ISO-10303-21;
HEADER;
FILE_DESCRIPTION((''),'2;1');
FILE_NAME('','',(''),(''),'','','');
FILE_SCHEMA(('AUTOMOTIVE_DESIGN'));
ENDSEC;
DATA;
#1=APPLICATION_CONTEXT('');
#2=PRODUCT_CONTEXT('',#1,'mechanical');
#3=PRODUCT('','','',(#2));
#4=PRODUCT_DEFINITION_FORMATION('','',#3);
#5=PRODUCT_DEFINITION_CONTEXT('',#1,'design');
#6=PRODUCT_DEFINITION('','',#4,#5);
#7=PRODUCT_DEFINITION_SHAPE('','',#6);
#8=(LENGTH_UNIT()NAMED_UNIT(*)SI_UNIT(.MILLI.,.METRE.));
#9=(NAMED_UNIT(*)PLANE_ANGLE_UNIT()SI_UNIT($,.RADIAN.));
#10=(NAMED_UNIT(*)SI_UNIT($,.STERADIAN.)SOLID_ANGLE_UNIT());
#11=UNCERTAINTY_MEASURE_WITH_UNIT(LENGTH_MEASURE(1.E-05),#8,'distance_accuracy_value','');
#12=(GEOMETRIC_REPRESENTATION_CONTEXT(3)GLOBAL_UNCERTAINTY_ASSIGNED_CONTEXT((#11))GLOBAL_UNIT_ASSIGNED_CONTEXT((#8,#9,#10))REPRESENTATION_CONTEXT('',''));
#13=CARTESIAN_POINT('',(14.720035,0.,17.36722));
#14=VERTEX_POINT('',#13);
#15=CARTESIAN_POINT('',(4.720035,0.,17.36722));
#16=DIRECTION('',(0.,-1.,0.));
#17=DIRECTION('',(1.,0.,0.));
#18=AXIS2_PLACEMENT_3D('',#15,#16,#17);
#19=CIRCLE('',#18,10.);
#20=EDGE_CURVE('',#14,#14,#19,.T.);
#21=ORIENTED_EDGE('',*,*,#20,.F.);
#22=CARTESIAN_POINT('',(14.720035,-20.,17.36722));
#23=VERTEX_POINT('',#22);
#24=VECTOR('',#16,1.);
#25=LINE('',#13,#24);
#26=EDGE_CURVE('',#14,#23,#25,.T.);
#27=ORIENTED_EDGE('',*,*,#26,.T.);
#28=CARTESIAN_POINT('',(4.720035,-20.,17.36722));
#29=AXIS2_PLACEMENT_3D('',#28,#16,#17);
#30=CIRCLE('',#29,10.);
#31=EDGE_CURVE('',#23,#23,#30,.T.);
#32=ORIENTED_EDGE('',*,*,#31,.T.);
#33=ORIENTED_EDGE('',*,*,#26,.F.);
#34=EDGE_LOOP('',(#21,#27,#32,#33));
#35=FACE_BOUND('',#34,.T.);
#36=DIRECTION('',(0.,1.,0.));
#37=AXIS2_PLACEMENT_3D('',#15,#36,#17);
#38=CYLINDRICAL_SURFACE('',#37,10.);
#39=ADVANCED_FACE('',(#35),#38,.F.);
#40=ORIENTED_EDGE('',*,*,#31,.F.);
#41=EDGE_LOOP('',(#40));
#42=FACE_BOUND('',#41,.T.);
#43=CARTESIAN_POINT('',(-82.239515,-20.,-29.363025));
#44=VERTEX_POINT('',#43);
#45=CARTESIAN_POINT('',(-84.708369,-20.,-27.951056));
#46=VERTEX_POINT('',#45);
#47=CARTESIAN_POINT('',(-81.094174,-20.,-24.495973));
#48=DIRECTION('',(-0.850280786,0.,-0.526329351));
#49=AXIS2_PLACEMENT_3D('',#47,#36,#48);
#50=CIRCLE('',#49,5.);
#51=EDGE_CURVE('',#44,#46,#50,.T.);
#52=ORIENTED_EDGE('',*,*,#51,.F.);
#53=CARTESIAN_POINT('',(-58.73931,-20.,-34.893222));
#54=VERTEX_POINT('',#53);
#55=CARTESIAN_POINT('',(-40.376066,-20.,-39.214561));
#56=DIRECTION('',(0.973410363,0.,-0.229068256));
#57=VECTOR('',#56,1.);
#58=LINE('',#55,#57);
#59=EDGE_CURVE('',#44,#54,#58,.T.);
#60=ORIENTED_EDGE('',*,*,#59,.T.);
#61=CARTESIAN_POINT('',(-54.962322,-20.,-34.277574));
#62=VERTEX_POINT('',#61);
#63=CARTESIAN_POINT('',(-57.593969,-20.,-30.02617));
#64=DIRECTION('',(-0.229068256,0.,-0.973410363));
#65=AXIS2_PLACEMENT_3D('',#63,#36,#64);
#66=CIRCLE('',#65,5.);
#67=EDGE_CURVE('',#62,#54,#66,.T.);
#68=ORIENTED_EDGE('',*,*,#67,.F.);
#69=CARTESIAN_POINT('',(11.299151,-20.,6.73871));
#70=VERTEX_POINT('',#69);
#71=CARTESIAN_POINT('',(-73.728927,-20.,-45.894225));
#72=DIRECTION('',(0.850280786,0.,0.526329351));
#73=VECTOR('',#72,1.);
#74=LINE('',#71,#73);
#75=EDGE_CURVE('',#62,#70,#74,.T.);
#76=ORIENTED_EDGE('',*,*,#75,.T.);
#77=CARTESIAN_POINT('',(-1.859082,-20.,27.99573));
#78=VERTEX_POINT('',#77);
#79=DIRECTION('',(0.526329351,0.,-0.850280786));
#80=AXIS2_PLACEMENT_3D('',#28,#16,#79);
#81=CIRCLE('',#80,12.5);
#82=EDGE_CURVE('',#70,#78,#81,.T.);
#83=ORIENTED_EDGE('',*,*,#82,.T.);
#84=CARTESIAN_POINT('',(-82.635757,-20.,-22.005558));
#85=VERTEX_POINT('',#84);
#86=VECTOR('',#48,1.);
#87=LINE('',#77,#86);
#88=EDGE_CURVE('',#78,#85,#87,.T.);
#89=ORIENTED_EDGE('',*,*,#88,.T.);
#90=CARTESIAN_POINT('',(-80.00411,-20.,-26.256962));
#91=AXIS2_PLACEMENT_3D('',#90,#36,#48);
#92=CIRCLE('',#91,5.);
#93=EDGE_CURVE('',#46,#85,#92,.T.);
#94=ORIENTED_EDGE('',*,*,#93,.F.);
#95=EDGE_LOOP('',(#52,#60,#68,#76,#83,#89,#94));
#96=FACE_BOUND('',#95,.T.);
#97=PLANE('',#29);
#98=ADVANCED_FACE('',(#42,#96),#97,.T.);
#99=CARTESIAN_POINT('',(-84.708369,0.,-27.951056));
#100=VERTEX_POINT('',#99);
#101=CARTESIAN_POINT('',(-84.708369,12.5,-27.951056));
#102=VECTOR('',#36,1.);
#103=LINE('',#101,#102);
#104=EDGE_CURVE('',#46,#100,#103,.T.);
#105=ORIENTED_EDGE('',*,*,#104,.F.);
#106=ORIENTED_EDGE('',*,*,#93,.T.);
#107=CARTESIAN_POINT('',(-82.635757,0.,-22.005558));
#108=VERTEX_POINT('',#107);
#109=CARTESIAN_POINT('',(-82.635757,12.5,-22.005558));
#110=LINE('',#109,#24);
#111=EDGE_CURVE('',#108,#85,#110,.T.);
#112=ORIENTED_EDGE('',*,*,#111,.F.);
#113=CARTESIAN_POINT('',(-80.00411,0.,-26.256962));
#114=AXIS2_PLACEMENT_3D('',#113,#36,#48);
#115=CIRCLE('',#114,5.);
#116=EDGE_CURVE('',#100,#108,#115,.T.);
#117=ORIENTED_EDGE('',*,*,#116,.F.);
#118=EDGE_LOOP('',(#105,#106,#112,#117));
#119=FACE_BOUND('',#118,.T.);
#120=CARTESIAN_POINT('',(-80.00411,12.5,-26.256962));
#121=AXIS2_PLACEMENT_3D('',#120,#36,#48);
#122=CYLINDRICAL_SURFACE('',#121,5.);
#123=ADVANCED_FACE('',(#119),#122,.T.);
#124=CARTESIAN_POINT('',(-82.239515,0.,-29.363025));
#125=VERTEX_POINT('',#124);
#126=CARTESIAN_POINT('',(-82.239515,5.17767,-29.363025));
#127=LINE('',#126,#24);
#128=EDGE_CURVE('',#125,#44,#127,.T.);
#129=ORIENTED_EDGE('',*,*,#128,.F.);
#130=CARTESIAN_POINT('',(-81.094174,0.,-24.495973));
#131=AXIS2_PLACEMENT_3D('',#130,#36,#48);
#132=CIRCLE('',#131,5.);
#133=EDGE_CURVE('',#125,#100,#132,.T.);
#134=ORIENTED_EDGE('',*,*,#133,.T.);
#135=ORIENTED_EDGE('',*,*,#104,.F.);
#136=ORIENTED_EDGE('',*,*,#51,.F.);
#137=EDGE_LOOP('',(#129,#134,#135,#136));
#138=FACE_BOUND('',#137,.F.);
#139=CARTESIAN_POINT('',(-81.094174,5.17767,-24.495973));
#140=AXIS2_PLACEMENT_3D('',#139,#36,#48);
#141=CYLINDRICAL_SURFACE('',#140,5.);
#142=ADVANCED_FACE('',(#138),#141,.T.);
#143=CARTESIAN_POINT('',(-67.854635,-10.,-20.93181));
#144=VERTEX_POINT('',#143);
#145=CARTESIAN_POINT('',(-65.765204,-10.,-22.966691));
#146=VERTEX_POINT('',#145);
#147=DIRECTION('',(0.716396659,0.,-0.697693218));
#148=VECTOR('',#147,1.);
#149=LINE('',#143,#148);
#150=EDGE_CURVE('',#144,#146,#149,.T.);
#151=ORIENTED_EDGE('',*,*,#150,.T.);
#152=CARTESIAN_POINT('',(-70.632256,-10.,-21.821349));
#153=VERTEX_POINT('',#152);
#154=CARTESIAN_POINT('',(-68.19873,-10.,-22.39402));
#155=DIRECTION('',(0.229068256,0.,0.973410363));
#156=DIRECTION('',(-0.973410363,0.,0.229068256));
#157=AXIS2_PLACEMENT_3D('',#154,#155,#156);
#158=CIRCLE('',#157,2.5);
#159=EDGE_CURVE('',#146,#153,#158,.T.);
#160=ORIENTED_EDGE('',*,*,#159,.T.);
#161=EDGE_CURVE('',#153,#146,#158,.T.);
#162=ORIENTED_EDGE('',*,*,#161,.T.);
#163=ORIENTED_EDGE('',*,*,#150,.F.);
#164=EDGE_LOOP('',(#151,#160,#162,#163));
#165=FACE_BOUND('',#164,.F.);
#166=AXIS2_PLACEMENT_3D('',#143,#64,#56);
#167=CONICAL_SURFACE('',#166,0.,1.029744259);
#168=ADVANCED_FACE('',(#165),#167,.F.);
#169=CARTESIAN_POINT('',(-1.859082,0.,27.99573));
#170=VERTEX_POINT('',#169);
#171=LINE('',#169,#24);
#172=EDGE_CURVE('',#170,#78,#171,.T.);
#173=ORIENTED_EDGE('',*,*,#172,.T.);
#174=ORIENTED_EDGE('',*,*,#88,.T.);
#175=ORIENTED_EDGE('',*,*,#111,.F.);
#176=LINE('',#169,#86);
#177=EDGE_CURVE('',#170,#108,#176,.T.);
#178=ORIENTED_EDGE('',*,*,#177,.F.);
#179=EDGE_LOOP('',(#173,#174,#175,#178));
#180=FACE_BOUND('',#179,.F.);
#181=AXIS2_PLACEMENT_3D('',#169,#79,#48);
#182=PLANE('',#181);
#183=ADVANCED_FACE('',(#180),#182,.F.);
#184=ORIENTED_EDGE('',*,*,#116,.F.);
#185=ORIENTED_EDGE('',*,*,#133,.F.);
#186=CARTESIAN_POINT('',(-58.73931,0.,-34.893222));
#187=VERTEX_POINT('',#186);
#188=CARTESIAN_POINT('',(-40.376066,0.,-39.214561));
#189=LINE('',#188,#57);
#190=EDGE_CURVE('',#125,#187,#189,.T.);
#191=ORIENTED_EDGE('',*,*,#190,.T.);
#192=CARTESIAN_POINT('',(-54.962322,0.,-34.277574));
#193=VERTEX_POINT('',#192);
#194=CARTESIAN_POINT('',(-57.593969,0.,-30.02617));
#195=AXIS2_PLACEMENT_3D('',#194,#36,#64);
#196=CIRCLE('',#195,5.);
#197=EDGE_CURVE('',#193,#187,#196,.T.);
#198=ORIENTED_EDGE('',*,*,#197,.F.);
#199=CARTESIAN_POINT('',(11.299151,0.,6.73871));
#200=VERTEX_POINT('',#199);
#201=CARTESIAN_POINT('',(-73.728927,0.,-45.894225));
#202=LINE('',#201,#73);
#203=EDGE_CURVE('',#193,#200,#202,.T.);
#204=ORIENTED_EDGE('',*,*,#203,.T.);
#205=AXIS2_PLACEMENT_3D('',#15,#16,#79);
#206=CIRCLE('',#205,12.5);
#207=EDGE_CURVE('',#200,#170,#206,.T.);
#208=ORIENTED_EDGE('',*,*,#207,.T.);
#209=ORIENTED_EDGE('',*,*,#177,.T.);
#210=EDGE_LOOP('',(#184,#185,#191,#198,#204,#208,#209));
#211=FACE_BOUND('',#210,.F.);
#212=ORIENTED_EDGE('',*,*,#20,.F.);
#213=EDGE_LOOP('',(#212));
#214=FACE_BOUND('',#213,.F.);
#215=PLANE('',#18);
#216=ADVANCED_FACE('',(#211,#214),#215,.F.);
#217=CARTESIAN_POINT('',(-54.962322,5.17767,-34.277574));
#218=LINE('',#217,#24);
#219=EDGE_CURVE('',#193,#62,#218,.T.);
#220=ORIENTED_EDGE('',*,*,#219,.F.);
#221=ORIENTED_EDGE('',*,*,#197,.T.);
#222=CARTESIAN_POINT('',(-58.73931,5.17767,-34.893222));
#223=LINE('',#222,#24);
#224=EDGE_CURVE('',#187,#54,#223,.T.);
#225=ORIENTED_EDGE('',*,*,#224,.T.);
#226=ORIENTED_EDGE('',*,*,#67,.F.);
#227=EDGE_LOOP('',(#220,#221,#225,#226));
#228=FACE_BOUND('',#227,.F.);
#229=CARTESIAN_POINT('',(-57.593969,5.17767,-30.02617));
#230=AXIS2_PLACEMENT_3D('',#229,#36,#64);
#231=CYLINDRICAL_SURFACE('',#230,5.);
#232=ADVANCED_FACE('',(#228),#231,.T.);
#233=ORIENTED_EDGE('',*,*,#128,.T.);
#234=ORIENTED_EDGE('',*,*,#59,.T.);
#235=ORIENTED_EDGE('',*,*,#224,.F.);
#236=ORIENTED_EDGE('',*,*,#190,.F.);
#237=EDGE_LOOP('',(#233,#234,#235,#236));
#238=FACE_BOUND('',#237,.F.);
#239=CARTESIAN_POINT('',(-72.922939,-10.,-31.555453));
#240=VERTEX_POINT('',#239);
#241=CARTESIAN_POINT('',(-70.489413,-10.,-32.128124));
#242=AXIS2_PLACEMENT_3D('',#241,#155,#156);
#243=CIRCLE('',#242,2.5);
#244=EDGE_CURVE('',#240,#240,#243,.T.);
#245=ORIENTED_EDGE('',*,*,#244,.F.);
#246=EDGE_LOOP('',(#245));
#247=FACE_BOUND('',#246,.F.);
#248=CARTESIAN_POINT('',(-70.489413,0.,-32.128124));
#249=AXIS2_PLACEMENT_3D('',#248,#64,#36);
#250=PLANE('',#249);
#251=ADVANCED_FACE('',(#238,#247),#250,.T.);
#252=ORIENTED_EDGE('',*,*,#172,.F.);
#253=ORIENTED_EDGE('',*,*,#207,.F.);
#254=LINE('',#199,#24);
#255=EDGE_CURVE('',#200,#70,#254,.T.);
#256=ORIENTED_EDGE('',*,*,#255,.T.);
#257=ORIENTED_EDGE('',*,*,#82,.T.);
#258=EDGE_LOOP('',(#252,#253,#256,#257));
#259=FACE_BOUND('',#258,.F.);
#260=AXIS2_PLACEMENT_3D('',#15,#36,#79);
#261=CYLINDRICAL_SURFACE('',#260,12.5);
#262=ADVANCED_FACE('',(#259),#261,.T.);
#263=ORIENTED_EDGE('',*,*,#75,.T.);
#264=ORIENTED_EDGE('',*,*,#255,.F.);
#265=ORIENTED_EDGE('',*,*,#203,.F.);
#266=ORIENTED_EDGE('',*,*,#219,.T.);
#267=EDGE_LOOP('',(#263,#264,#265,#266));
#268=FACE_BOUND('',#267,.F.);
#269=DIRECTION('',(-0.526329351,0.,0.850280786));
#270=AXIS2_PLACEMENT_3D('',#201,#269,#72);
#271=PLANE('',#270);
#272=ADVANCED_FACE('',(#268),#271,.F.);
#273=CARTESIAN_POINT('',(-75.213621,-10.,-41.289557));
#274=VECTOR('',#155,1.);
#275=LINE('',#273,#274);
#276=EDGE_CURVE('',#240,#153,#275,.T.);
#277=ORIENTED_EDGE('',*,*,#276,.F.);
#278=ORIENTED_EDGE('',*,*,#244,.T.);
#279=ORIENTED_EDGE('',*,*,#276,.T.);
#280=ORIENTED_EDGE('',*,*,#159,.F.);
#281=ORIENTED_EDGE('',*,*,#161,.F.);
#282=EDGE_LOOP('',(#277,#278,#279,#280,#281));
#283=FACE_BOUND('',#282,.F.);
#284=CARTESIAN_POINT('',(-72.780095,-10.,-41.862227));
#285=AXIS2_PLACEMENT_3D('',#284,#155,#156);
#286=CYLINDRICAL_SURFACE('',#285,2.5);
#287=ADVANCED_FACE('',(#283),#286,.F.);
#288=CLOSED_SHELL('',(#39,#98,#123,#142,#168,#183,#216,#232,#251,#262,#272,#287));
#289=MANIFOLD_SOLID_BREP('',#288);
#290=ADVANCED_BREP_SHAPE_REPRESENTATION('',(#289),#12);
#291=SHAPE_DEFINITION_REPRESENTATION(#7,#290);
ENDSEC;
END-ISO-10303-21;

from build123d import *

# Parameters (mm, degrees)
F0_R        = 10
F1_DEPTH    = 20
F2_SIZE     = 20
F4_D        = 5
F4_DEPTH    = 10
F4_TIP      = 1.5021515476
F5_T1_DEPTH = 45
F5_T3_DEPTH = 30.3553390593


# Not quite as in the source:
# - a fillet or chamfer that OpenCascade refuses, or shapes differently, is made with other operations: its cross-section is extruded or revolved along the edge and cut away or added
# - a feature names something its author has since deleted; it is built from what else it names


with BuildPart() as f1:
    # F0 (on Front) → F1 (new body)
    with BuildSketch(Plane.XZ):
        with BuildLine():
            ThreePointArc((11.2991514202, 6.738710196), (15.6399466463, 11.2840038059), (17.2200345341, 17.3672200162))
            ThreePointArc((17.2200345341, 17.3672200162), (10.8032507445, 28.2871321284), (-1.8590823519, 27.9957298365))
            ThreePointArc((-1.8590823519, 27.9957298365), (-5.9084752861, 10.7881031302), (11.2991514202, 6.738710196))
        make_face()
        with Locations((4.7200345341, 17.3672200162)):
            Circle(F0_R, mode=Mode.SUBTRACT)
        with BuildLine():
            ThreePointArc((11.2991514202, 6.738710196), (-5.9084752861, 10.7881031302), (-1.8590823519, 27.9957298365))
            Line((-1.8590823519, 27.9957298365), (-86.8871609141, -24.6372052518))
            Line((-86.8871609141, -24.6372052518), (-73.728927142, -45.8942248924))
            Line((-73.728927142, -45.8942248924), (11.2991514202, 6.738710196))
        make_face()
    extrude(amount=F1_DEPTH)

    # F2
    f2_edges = [f1.edges().sort_by_distance(p)[0] for p in [
        (-73.728927, -10, -45.894225),
    ]]
    chamfer(f2_edges, length=F2_SIZE)

    # F4
    with Locations(Plane(origin=(-10.8625851344, 0, -46.1598350898), x_dir=(0.9734103626, 0, -0.2290682563), z_dir=(-0.2290682563, 0, -0.9734103626))):
        with Locations((-61.2555916321, 10)):
            Hole(F4_D / 2, depth=F4_DEPTH)
            with Locations((0, 0, -(F4_DEPTH + F4_TIP / 2))):  # 118° drill point
                Cone(0, F4_D / 2, F4_TIP, mode=Mode.SUBTRACT)

    # F5: fillet of radius 5 on 3 edges, made by hand

    # F5_s2 → F5_t1 (cut)
    with BuildSketch(Plane.XZ.offset(-12.5)):
        with BuildLine():
            ThreePointArc((-84.2555141597, -28.8886091799), (-84.8711620445, -25.1116211441), (-82.635756986, -22.0055584974))
            Line((-82.635756986, -22.0055584974), (-86.8871609141, -24.6372052518))
            Line((-86.8871609141, -24.6372052518), (-84.2555141597, -28.8886091799))
        make_face()
    extrude(amount=F5_T1_DEPTH, mode=Mode.SUBTRACT)

    # F5_s4 → F5_t3 (cut)
    with BuildSketch(Plane.XZ.offset(-5.1776695297)):
        with BuildLine():
            ThreePointArc((-85.3455779368, -27.1276200138), (-84.0148714695, -28.5542396802), (-82.2395152901, -29.3630250722))
            Line((-82.2395152901, -29.3630250722), (-84.2555141597, -28.8886091799))
            Line((-84.2555141597, -28.8886091799), (-85.3455779368, -27.1276200138))
        make_face()
        with BuildLine():
            ThreePointArc((-58.7393102993, -34.8932219824), (-56.7895862922, -34.9610428559), (-54.9623222634, -34.2775740977))
            Line((-54.9623222634, -34.2775740977), (-56.7233114296, -35.3676378747))
            Line((-56.7233114296, -35.3676378747), (-58.7393102993, -34.8932219824))
        make_face()
    extrude(amount=F5_T3_DEPTH, mode=Mode.SUBTRACT)


solid = f1.part
